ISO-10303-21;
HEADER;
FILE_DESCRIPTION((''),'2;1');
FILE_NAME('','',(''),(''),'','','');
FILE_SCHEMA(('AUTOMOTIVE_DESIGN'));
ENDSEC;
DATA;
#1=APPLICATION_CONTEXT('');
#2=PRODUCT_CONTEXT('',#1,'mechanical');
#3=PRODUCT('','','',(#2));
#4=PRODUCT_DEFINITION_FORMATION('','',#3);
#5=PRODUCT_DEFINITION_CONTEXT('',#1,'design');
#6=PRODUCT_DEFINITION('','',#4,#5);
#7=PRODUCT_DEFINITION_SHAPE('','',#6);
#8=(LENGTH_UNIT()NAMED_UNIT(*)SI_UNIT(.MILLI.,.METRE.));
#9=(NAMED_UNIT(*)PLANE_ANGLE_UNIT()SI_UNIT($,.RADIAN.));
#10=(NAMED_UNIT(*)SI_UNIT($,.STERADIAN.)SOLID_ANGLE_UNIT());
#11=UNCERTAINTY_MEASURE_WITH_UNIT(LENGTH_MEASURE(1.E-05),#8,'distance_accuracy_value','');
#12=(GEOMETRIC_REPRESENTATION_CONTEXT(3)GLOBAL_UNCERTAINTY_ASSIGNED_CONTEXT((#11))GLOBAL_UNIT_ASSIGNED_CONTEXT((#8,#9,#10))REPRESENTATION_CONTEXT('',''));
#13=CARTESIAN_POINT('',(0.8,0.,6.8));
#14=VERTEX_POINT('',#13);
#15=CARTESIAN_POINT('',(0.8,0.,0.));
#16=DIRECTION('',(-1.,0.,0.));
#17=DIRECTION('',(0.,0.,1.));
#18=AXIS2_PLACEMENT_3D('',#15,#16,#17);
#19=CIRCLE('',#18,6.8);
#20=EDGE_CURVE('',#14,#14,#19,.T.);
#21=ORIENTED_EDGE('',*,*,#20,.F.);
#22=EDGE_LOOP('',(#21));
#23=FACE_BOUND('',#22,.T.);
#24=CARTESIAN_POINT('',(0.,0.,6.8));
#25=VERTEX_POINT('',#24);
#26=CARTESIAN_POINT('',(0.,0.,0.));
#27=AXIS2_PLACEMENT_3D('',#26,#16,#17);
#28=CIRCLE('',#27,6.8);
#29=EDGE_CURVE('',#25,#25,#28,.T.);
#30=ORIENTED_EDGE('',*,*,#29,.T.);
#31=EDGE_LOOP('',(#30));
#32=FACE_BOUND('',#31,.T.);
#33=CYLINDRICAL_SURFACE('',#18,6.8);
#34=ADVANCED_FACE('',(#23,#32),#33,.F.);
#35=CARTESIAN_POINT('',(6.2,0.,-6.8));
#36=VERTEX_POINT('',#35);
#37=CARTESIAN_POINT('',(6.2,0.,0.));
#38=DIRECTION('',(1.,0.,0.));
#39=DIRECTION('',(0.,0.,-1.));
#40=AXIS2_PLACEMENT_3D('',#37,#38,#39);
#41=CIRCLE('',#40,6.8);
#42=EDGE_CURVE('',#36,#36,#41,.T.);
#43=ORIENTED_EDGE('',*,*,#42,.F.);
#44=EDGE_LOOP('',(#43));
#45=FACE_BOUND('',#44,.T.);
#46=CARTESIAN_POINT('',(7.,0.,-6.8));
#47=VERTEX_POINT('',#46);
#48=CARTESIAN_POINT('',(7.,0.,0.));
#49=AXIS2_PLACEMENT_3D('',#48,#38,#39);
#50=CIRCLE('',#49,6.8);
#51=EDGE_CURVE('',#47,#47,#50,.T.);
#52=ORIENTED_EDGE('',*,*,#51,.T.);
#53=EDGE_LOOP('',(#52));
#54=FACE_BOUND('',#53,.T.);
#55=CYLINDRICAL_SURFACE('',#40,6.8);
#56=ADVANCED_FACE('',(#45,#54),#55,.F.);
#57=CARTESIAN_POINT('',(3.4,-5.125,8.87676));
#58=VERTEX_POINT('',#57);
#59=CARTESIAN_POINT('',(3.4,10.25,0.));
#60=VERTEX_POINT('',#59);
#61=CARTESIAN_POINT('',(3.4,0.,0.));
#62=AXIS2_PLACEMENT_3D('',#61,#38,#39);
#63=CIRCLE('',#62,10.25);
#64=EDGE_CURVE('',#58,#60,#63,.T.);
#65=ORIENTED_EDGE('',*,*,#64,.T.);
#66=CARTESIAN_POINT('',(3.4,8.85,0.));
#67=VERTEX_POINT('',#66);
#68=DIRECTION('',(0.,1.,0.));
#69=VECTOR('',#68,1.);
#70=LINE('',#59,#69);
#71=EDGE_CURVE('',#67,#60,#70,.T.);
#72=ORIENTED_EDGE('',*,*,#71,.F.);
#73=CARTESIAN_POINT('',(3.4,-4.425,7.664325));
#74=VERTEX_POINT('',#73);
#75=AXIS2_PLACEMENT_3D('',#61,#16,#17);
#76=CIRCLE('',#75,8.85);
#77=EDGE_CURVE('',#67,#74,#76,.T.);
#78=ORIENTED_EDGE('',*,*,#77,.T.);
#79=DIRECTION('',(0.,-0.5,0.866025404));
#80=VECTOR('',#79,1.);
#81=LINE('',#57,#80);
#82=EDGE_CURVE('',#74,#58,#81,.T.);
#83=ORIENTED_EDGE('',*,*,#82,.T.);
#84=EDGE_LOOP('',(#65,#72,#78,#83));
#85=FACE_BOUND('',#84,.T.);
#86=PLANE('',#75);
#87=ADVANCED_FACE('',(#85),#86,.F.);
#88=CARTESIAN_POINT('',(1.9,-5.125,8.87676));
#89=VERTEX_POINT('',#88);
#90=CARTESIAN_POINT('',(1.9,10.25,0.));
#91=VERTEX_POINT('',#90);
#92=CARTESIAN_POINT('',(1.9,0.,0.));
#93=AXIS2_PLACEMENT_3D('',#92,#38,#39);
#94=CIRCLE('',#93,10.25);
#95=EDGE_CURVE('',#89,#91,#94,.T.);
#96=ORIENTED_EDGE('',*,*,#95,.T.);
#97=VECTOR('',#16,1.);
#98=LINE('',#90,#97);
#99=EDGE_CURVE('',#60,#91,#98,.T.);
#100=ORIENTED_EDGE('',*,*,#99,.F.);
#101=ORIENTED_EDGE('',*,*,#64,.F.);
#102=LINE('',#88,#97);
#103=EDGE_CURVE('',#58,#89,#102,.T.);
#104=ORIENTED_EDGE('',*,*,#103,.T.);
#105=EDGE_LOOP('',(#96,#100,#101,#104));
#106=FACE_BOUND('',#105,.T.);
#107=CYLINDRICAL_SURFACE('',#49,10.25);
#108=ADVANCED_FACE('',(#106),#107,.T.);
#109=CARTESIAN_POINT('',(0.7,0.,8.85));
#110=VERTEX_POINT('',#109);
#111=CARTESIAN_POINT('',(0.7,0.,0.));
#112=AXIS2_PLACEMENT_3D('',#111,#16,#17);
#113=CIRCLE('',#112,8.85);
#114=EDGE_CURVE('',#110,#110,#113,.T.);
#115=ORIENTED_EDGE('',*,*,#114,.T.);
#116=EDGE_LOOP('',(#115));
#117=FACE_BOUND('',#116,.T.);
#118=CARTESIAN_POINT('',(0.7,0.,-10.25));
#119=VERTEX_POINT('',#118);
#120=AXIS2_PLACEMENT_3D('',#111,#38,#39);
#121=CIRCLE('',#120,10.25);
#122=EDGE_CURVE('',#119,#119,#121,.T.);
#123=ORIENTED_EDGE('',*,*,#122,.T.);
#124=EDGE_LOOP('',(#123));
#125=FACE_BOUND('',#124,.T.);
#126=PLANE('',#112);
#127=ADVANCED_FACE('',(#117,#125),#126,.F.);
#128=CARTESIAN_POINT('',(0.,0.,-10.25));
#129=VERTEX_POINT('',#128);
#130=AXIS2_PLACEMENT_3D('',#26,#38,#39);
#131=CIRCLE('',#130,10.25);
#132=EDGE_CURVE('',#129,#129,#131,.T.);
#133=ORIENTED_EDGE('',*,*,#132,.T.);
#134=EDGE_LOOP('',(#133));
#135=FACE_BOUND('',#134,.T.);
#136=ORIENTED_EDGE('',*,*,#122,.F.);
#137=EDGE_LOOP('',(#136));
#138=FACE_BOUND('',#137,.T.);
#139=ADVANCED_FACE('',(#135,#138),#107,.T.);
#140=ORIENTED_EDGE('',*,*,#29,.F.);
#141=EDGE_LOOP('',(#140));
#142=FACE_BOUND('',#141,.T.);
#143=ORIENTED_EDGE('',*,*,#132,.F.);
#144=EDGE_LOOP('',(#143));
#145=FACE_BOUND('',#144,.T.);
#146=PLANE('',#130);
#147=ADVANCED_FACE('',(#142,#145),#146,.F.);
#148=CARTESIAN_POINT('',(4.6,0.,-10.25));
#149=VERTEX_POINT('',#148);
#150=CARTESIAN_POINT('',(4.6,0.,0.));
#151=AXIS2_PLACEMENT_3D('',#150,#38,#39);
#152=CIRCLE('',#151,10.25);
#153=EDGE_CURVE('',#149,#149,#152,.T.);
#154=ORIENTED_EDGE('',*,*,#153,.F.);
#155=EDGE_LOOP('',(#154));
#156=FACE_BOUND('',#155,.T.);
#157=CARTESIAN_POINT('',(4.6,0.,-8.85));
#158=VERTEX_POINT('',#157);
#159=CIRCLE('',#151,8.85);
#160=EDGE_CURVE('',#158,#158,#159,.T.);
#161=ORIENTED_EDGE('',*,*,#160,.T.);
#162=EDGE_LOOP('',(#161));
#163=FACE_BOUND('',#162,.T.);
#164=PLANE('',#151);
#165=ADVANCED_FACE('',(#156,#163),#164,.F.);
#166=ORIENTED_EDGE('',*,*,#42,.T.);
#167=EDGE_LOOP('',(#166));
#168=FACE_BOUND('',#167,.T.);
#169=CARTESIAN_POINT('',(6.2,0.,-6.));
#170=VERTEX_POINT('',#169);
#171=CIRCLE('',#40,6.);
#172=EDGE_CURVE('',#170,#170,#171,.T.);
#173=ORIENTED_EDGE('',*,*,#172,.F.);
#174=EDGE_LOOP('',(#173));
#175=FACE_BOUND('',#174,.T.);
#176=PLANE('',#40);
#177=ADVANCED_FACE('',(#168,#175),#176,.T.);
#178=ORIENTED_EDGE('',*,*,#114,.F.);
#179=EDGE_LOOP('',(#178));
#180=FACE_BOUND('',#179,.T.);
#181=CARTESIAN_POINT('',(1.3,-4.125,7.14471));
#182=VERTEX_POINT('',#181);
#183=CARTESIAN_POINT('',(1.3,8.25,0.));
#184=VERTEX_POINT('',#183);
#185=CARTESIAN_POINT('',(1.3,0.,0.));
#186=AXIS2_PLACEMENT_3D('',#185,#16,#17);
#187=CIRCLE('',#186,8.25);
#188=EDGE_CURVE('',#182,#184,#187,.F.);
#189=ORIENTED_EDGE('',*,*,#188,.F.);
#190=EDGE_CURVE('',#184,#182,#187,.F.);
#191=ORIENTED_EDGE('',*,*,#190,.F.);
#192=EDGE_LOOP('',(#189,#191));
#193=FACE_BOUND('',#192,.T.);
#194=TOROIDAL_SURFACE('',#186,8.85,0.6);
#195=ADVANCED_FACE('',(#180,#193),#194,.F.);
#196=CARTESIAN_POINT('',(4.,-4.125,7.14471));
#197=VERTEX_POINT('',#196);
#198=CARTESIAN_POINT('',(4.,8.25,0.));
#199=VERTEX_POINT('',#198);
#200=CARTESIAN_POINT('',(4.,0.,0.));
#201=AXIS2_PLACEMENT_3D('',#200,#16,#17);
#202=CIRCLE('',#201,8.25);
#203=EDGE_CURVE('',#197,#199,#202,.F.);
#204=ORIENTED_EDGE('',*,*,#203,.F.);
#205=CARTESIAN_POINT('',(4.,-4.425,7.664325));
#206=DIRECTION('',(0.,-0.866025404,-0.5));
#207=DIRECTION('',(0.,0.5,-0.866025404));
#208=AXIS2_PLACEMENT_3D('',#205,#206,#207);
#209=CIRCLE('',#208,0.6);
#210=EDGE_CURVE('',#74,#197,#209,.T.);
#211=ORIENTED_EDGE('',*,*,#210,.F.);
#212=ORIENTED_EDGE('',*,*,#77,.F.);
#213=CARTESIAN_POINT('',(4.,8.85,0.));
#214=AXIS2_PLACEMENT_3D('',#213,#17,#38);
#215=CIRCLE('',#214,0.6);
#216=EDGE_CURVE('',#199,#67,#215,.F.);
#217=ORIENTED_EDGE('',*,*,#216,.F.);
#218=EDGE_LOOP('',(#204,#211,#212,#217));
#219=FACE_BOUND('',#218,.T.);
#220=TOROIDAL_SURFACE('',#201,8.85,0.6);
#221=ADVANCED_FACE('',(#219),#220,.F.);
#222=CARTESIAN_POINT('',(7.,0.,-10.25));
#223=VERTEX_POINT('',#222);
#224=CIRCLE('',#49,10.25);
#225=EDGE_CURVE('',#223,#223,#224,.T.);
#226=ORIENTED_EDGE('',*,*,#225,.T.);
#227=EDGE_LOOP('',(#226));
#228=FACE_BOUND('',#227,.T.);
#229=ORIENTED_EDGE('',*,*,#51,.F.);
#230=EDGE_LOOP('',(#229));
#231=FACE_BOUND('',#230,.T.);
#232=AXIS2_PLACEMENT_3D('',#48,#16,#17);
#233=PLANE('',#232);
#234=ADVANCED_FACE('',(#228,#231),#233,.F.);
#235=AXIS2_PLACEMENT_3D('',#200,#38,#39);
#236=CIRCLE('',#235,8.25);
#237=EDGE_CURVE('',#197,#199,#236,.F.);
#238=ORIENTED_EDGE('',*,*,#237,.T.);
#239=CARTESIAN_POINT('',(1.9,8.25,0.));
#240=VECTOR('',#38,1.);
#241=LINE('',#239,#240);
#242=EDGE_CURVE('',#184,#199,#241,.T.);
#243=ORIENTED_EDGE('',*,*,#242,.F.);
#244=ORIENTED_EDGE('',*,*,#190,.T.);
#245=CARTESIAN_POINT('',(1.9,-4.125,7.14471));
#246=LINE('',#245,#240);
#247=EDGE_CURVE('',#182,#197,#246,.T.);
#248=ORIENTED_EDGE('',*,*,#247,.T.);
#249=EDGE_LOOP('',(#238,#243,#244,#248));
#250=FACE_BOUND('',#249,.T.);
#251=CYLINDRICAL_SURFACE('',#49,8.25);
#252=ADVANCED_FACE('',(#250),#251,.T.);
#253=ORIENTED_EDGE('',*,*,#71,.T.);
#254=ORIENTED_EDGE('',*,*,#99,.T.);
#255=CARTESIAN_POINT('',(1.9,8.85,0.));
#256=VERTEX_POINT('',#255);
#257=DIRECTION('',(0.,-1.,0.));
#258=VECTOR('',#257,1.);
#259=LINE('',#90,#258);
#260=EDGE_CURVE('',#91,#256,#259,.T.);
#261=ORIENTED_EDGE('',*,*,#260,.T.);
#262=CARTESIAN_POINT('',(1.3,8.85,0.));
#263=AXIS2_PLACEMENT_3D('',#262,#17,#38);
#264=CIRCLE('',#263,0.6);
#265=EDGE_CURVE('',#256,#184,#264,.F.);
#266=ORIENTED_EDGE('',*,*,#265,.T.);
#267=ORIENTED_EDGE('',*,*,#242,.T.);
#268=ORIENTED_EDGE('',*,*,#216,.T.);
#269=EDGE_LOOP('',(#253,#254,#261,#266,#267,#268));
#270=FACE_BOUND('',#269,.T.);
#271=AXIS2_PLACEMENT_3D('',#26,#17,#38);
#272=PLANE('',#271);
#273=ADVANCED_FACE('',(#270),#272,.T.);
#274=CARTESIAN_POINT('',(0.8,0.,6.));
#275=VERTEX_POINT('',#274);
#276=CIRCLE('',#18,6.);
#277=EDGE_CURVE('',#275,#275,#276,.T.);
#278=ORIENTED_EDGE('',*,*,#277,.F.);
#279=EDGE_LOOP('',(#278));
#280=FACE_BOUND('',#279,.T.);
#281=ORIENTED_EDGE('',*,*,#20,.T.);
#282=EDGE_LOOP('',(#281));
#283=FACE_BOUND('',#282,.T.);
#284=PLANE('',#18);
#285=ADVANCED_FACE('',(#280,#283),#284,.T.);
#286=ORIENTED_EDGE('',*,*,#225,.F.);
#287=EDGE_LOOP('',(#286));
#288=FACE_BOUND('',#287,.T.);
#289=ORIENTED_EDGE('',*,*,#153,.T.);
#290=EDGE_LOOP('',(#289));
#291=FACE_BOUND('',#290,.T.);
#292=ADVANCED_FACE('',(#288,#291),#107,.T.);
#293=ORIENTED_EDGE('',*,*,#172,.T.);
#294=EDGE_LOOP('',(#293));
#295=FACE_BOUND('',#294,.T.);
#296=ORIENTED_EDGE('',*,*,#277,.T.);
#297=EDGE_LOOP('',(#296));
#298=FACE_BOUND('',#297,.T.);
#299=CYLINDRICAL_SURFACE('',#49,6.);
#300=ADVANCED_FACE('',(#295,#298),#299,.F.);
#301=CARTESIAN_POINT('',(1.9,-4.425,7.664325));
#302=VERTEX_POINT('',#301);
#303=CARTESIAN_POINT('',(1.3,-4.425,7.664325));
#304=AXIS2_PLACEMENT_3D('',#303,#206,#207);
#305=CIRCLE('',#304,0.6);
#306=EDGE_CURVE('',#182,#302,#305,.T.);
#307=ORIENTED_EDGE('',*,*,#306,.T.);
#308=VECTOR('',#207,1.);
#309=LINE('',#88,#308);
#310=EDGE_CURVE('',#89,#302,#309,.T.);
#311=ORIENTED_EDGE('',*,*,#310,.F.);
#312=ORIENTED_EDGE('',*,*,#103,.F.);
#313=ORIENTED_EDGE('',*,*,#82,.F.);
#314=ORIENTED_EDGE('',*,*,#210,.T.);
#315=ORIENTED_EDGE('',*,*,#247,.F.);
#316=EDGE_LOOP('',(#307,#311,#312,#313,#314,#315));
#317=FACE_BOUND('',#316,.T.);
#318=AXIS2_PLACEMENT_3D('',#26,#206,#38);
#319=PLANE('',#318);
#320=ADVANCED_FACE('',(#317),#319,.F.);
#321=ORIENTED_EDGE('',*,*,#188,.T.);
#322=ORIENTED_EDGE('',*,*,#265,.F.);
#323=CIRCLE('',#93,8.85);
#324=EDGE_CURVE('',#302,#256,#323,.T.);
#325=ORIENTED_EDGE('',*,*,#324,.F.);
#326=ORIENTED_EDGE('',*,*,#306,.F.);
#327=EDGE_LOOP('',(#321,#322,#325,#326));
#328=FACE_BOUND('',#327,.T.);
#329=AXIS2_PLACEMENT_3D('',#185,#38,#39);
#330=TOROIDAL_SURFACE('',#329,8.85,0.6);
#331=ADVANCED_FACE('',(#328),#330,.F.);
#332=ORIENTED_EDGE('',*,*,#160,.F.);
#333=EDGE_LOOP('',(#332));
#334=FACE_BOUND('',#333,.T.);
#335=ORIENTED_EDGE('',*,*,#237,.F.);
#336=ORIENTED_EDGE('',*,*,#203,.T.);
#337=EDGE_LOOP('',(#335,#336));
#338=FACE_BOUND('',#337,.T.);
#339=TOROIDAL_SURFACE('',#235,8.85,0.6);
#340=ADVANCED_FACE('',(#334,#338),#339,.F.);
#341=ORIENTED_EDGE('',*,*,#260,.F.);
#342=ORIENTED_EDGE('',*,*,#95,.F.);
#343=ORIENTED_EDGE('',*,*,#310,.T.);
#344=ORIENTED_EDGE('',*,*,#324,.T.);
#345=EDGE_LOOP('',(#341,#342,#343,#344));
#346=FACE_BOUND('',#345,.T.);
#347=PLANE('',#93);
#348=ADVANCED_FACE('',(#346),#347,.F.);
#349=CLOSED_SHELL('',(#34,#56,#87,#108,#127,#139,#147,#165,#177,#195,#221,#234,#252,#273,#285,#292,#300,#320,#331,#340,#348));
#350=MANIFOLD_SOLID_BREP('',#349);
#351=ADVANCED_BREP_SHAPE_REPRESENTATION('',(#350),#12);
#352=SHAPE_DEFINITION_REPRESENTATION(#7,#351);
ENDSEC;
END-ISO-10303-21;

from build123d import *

# Parameters (mm, degrees)
SKETCH8_W          = 1.5
SKETCH8_H          = 2
CUT_REVOLVE1_ANGLE = 120
FILLET1_R          = 0.6
SKETCH3_R          = 6.8
CUT_EXTRUDE1_DEPTH = 0.8
CUT_EXTRUDE2_START = -0.8
SKETCH4_R          = 6.8
CUT_EXTRUDE2_DEPTH = 0.8


with BuildPart() as part:
    # Sketch2 → Revolve1 (revolve)
    with BuildSketch(Plane(origin=(0, 0, 0), x_dir=(1, 0, 0), z_dir=(0, 1, 0))):
        Polygon((7, 10.25), (7, 6), (0, 6), (0, 10.25), (0.7, 10.25), (0.7, 8.25), (1.9, 8.25), (1.9, 10.25), (3.4, 10.25), (3.4, 8.25), (4.6, 8.25), (4.6, 10.25), align=None)
    revolve(axis=Axis((7, 0, 0), (-1, 0, 0)))

    # Sketch8 → Cut-Revolve1 (revolve, cut)
    with BuildSketch(Plane.XY):
        with Locations((2.65, 9.25)):
            Rectangle(SKETCH8_W, SKETCH8_H)
    revolve(axis=Axis((0, 0, 0), (1, 0, 0)), revolution_arc=CUT_REVOLVE1_ANGLE, mode=Mode.SUBTRACT)

    # Fillet1
    # the kernel refuses this fillet: 0.6 mm, written as the material it adds along each edge
    with BuildSketch(Plane(origin=(0.7, 0, 0), x_dir=(0, 0, -1), z_dir=(0, 1, 0))) as fillet1_piece_1:
        with BuildLine():
            CenterArc((8.25 + FILLET1_R, -FILLET1_R), FILLET1_R, 90, 90)
            Line((8.25, -FILLET1_R), (8.25, 0))
            Line((8.25, 0), (8.25 + FILLET1_R, 0))
        make_face()
    revolve(axis=Axis((0.7, 0, 0), (-1, 0, 0)))
    with BuildSketch(Plane(origin=(4.6, 0, 0), x_dir=(0, 0, -1), z_dir=(0, 1, 0))) as fillet1_piece_2:
        with BuildLine():
            CenterArc((8.25 + FILLET1_R, FILLET1_R), FILLET1_R, 180, 90)
            Line((8.25, FILLET1_R), (8.25, 0))
            Line((8.25, 0), (8.25 + FILLET1_R, 0))
        make_face()
    revolve(axis=Axis((4.6, 0, 0), (-1, 0, 0)))
    with BuildSketch(Plane(origin=(1.9, 0, 0), x_dir=(0, 0, -1), z_dir=(0, 1, 0))) as fillet1_piece_3:
        with BuildLine():
            CenterArc((8.25 + FILLET1_R, FILLET1_R), FILLET1_R, 180, 90)
            Line((8.25 + FILLET1_R, 0), (8.25, 0))
            Line((8.25, 0), (8.25, FILLET1_R))
        make_face()
    revolve(axis=Axis((1.9, 0, 0), (-1, 0, 0)), revolution_arc=150)
    with BuildSketch(Plane(origin=(3.4, 0, 0), x_dir=(0, 0, -1), z_dir=(0, 1, 0))) as fillet1_piece_4:
        with BuildLine():
            CenterArc((8.25 + FILLET1_R, -FILLET1_R), FILLET1_R, 90, 90)
            Line((8.25 + FILLET1_R, 0), (8.25, 0))
            Line((8.25, 0), (8.25, -FILLET1_R))
        make_face()
    revolve(axis=Axis((3.4, 0, 0), (-1, 0, 0)), revolution_arc=150)
    with BuildSketch(Plane(origin=(3.4, 0, 0), x_dir=(0, 1, 0), z_dir=(0, 0, 1))) as fillet1_piece_5:
        with BuildLine():
            CenterArc((8.25 + FILLET1_R, -FILLET1_R), FILLET1_R, 90, 90)
            Line((8.25 + FILLET1_R, 0), (8.25, 0))
            Line((8.25, 0), (8.25, -FILLET1_R))
        make_face()
    revolve(axis=Axis((3.4, 0, 0), (-1, 0, 0)), revolution_arc=90)
    with BuildSketch(Plane(origin=(1.9, 0, 0), x_dir=(0, 1, 0), z_dir=(0, 0, 1))) as fillet1_piece_6:
        with BuildLine():
            CenterArc((8.25 + FILLET1_R, FILLET1_R), FILLET1_R, 180, 90)
            Line((8.25 + FILLET1_R, 0), (8.25, 0))
            Line((8.25, 0), (8.25, FILLET1_R))
        make_face()
    revolve(axis=Axis((1.9, 0, 0), (-1, 0, 0)), revolution_arc=90)

    # Sketch3 → Cut-Extrude1 (cut)
    with BuildSketch(Plane(origin=(7, 0, 0), x_dir=(0, 0, -1), z_dir=(1, 0, 0))):
        Circle(SKETCH3_R)
    extrude(amount=-CUT_EXTRUDE1_DEPTH, mode=Mode.SUBTRACT)

    # Sketch4 → Cut-Extrude2 (cut)
    with BuildSketch(Plane.ZY.offset(CUT_EXTRUDE2_START)):
        with Locations(Location((0, 0, 0), (0, 0, 180))):
            Circle(SKETCH4_R)
    extrude(amount=CUT_EXTRUDE2_DEPTH, mode=Mode.SUBTRACT)


solid = part.part
